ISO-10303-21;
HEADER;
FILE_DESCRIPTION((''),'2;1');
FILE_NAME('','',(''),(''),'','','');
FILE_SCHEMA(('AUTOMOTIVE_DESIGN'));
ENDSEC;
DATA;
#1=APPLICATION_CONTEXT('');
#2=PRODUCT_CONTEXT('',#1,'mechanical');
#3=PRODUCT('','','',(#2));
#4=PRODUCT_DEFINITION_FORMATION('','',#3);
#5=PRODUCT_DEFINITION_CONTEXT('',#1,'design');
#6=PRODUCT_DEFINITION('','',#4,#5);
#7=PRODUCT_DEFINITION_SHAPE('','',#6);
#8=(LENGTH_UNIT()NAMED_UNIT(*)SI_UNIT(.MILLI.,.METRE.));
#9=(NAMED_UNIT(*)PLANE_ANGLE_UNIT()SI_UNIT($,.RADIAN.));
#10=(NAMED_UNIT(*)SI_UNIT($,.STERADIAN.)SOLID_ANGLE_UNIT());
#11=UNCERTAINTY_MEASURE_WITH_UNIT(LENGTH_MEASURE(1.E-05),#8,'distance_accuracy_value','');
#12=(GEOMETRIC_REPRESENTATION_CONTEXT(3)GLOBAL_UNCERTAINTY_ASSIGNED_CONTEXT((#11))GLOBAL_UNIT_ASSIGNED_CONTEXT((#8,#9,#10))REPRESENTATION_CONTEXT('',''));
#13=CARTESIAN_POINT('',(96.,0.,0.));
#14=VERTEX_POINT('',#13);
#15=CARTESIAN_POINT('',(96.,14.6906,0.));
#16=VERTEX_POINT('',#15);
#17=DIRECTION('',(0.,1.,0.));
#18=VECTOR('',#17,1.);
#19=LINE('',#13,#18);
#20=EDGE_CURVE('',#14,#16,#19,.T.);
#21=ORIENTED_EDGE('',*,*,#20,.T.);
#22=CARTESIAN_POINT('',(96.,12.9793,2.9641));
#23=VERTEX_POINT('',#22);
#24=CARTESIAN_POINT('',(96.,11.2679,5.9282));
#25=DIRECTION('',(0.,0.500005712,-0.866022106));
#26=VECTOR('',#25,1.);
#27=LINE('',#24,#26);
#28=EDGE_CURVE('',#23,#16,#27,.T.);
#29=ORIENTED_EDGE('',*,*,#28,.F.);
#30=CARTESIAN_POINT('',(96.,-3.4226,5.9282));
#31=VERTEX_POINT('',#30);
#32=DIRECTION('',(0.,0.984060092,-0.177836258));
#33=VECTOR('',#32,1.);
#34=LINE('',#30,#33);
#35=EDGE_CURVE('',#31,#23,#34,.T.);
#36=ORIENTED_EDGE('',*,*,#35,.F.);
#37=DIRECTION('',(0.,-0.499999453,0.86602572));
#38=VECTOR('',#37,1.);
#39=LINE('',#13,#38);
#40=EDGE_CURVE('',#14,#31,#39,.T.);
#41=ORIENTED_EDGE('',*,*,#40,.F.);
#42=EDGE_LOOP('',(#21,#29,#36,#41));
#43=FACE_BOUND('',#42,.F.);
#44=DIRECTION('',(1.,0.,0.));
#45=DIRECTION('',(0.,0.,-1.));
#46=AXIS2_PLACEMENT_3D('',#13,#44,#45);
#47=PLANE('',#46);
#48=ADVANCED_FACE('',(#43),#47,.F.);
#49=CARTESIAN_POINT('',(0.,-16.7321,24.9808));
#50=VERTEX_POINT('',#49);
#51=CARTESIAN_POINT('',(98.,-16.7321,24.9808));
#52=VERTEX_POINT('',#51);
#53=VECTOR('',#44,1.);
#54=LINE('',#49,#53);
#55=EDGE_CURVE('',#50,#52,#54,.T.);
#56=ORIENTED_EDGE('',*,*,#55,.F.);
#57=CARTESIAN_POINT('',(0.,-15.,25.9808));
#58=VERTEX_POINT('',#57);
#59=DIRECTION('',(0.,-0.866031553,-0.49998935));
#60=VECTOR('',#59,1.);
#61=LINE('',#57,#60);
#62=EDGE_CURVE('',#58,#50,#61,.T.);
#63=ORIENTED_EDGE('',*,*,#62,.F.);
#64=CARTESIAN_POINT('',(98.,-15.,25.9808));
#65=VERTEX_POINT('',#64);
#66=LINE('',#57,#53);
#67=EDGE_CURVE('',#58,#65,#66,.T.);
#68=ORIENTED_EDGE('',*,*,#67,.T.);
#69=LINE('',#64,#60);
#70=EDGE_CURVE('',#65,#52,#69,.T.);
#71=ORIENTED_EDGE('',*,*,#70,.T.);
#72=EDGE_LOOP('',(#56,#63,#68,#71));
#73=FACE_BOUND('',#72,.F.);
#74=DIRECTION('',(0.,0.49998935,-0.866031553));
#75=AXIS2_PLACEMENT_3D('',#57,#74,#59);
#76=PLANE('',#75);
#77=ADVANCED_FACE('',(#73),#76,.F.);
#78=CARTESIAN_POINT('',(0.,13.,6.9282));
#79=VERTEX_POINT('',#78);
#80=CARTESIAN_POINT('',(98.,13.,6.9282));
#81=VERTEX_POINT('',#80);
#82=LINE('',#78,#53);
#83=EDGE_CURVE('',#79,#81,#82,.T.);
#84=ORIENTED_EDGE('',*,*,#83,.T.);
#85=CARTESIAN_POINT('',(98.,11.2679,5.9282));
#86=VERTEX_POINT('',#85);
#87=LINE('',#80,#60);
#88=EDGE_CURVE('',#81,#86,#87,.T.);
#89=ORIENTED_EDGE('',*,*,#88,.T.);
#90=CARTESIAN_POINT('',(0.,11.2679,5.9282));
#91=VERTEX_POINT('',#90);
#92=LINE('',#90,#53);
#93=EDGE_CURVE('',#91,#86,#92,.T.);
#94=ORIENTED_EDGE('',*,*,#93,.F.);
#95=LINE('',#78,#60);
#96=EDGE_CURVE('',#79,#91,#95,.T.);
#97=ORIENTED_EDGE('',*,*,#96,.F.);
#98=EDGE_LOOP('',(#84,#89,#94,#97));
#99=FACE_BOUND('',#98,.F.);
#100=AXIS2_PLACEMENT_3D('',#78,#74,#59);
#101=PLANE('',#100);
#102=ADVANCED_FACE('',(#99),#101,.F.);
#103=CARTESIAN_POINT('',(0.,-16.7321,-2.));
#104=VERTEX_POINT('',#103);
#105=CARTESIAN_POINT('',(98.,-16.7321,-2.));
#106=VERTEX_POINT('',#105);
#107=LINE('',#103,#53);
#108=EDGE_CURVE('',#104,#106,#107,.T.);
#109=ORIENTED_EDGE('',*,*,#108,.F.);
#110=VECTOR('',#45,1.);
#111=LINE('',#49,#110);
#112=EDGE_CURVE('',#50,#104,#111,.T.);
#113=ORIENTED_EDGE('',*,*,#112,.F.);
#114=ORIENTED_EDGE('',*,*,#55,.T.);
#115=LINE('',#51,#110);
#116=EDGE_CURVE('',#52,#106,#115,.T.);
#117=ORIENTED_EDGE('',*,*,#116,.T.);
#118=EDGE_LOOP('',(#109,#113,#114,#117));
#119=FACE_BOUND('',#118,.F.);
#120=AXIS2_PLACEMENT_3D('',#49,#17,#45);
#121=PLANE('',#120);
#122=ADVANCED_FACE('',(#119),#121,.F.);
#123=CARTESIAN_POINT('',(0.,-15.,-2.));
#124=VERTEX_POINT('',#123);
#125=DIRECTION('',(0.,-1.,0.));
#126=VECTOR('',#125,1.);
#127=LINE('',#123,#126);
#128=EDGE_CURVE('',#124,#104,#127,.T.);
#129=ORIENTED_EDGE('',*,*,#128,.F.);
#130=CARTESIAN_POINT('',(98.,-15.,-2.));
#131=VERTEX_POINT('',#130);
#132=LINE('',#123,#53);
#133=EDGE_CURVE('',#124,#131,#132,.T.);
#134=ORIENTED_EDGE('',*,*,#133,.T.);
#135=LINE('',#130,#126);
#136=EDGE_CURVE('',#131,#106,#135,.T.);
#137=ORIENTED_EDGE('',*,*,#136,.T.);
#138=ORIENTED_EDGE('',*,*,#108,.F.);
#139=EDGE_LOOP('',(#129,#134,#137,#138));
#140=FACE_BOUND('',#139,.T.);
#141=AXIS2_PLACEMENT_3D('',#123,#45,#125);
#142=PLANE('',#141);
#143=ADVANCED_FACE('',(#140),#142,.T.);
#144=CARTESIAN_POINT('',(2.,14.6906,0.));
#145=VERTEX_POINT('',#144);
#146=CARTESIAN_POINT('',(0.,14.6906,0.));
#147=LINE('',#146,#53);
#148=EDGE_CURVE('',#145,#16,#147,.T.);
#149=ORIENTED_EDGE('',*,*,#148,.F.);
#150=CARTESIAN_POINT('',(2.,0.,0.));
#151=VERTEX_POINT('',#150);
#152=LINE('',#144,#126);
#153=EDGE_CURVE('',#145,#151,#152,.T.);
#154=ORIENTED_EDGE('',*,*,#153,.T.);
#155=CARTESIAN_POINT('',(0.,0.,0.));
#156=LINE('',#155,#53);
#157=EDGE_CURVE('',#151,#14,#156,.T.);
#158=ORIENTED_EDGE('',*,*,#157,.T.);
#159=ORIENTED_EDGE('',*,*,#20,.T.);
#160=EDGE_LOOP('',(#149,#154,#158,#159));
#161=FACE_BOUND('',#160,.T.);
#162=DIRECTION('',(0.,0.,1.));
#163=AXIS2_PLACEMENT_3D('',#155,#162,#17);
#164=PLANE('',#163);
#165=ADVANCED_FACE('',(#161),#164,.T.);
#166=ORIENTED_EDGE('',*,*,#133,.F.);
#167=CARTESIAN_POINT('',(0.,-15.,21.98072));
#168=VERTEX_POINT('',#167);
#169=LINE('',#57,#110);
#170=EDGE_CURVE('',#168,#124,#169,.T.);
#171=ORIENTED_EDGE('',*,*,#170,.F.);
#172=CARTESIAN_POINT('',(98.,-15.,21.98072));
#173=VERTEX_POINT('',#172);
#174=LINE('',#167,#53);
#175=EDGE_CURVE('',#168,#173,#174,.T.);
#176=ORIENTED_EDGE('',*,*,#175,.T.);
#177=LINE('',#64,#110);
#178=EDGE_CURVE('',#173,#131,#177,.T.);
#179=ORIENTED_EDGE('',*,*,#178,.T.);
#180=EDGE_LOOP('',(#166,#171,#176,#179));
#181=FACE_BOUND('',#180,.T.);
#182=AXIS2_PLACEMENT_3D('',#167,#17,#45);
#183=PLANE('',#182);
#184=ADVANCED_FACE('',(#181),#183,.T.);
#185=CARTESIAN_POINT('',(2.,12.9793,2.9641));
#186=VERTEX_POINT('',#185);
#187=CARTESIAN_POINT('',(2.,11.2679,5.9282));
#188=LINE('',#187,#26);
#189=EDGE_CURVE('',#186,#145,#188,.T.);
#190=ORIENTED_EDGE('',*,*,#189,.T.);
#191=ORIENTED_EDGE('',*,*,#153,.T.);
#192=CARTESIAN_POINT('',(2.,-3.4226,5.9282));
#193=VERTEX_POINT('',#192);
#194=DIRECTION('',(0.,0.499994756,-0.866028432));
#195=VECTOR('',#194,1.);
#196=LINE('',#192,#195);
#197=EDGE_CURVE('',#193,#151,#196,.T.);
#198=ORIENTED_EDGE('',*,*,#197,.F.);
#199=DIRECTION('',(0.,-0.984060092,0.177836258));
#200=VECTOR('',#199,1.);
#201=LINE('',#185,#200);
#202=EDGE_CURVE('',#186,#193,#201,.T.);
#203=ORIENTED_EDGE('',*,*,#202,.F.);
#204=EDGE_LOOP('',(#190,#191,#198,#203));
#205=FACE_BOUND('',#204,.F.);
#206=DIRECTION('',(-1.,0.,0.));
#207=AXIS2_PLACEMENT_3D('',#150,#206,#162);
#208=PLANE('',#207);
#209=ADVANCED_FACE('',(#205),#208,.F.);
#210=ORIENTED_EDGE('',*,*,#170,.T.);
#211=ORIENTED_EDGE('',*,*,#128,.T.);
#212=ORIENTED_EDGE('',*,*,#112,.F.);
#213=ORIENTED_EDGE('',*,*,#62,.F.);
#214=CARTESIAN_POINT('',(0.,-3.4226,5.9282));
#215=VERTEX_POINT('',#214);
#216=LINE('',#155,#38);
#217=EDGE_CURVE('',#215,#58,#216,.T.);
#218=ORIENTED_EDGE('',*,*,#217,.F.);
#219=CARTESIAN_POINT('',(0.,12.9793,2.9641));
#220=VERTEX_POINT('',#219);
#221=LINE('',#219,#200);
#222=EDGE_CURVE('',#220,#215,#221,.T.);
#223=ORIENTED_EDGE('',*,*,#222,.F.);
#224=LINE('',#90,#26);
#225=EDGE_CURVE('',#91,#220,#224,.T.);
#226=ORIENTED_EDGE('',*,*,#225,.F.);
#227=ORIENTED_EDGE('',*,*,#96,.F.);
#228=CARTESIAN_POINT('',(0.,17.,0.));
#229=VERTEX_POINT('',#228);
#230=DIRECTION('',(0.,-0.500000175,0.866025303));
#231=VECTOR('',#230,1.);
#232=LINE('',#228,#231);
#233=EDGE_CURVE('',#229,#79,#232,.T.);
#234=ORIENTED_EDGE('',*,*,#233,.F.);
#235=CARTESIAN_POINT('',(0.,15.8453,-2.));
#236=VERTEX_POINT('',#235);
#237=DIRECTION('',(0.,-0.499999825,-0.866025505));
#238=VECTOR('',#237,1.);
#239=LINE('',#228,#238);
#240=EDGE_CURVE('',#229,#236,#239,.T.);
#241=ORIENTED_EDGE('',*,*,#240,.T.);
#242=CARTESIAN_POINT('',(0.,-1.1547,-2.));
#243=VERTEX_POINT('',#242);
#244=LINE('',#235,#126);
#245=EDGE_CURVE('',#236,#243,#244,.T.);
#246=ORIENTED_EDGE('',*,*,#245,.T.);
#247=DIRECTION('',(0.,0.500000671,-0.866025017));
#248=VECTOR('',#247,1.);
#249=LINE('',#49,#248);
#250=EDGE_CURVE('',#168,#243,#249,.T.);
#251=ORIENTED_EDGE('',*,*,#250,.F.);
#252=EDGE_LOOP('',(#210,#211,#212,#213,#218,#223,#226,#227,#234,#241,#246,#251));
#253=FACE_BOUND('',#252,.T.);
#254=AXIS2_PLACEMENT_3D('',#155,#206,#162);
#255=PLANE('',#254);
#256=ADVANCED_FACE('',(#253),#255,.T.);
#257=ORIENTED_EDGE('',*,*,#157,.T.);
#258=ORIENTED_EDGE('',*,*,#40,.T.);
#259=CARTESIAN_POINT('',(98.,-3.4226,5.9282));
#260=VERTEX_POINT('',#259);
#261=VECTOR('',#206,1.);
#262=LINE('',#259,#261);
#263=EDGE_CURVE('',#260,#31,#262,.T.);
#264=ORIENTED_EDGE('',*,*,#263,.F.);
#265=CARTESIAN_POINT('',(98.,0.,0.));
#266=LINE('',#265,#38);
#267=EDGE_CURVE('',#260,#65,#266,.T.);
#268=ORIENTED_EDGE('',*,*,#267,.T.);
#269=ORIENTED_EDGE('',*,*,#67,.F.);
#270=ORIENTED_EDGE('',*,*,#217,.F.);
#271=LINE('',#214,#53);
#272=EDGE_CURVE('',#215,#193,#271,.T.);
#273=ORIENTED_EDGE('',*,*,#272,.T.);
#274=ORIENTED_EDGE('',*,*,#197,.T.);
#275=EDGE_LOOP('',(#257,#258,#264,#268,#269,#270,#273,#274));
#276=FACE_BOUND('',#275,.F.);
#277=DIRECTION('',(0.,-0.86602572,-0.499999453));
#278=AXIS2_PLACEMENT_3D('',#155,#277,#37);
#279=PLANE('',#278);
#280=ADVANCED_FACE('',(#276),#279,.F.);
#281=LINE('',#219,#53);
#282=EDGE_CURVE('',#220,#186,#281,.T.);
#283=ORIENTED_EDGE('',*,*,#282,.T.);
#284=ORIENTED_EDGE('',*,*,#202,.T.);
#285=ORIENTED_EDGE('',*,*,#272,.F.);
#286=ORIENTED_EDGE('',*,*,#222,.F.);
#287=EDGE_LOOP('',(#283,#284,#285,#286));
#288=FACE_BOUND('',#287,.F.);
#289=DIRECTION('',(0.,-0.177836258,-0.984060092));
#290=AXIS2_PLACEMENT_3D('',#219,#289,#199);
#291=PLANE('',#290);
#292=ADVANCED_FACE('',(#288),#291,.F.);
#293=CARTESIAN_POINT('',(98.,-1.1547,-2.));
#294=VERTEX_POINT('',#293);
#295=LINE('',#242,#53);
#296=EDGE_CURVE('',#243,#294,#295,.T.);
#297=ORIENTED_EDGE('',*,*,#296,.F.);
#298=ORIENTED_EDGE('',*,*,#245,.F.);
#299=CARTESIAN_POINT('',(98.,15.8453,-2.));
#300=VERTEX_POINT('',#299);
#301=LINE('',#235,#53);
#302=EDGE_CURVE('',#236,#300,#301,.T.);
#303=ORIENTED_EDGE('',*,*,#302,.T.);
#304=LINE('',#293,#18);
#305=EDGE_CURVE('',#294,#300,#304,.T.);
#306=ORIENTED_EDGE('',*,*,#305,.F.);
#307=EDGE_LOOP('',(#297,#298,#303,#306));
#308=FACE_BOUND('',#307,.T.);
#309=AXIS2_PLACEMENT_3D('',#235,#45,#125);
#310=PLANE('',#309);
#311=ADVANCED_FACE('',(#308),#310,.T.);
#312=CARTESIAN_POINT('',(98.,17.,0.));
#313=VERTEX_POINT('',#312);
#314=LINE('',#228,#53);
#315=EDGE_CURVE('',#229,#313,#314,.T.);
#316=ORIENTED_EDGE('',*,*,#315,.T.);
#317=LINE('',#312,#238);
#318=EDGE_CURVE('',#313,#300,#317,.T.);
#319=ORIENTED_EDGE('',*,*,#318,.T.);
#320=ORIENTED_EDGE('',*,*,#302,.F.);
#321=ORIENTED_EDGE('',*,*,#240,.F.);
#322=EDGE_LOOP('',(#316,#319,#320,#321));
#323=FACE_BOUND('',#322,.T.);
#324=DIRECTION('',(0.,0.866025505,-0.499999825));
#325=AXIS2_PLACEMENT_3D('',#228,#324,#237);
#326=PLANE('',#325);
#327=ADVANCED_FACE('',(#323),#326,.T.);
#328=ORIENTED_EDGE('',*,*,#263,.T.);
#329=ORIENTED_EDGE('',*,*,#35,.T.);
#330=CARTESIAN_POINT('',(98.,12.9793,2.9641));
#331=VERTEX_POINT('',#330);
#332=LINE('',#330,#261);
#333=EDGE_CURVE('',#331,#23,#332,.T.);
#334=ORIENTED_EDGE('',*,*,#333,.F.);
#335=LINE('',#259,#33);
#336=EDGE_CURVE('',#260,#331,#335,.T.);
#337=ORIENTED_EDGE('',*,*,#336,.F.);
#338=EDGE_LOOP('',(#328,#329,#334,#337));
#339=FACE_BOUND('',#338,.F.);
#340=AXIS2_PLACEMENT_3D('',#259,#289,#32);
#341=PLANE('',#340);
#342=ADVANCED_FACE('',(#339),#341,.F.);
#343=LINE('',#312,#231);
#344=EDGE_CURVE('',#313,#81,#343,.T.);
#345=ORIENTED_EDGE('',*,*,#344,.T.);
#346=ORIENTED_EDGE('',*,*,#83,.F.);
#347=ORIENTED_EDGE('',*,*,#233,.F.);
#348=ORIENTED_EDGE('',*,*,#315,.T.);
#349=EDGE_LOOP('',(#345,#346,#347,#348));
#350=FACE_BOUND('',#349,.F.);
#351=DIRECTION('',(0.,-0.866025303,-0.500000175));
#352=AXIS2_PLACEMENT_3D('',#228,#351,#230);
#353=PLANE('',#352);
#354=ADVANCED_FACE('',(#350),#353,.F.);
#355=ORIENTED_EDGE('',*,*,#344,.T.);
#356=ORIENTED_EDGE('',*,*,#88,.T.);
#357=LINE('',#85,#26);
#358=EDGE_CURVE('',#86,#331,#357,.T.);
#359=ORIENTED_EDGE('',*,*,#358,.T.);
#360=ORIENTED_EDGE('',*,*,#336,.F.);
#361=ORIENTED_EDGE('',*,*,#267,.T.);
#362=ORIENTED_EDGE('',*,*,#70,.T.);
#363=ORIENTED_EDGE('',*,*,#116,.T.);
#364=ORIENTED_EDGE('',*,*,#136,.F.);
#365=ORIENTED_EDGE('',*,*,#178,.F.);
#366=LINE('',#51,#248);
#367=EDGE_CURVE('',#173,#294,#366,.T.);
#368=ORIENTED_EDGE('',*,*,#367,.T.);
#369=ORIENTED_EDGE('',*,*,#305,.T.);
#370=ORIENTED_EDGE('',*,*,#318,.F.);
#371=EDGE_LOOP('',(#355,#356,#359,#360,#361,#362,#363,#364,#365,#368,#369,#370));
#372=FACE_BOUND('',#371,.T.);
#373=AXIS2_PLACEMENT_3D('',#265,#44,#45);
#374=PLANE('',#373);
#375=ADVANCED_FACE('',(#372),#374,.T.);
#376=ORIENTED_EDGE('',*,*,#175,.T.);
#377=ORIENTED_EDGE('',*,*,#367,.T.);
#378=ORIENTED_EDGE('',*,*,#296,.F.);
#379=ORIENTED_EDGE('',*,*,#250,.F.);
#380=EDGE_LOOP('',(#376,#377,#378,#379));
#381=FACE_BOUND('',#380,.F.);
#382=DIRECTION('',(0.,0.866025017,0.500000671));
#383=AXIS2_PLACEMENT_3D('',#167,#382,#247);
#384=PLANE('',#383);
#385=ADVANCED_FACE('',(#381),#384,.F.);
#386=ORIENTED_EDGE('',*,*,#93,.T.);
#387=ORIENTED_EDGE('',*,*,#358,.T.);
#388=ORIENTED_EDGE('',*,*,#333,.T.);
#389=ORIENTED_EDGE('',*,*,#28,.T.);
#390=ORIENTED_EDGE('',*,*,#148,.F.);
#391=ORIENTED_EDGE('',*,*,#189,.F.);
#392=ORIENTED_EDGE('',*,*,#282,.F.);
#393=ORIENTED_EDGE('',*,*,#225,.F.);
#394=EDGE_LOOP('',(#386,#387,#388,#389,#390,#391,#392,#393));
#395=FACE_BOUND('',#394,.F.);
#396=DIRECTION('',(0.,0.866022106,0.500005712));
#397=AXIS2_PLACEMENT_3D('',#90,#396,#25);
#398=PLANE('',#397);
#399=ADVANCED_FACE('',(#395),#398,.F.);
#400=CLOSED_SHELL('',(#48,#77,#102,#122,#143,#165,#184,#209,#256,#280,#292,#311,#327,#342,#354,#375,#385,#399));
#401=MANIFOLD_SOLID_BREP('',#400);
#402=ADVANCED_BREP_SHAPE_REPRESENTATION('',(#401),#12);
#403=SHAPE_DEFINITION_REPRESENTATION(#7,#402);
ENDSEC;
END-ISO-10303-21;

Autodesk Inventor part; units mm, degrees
ref_plane "YZ Plane" through (0, 0, 0) normal (1, 0, 0) x (0, 1, 0)
ref_plane "XZ Plane" through (0, 0, 0) normal (0, 1, 0) x (-1, 0, 0)
ref_plane "XY Plane" through (0, 0, 0) normal (0, 0, 1) x (1, 0, 0)
sketch "Sketch1" plane through (0, 0, 0) normal (1, 0, 0) x (0, 1, 0)
  line L0 (0, 0) -> (17, 0)
  line L1 (17, 0) -> (17, -2)
  line L2 (17, -2) -> (0, -2)
  line L3 (0, -2) -> (0, 0)
  line L4 (17, 0) -> (13, 6.9282)
  line L5 (17, 0) -> (25, 0) construction
  line L6 (13, 6.9282) -> (11.2679, 5.9282)
  line L7 (11.2679, 5.9282) -> (14.6906, 0)
  line L8 (0, 0) -> (-15, 25.9808)
  line L9 (0, 0) -> (30, 0) construction
  line L10 (-15, 25.9808) -> (-16.7321, 24.9808)
  line L11 (-16.7321, 24.9808) -> (-1.1547, -2)
  line L12 (-1.1547, -2) -> (0, -2)
  line L13 (-16.7321, 24.9808) -> (-16.7321, -2)
  line L14 (-15, 25.9808) -> (-15, -2)
  line L15 (-15, -2) -> (-16.7321, -2)
  line L16 (17, 0) -> (15.8453, -2)
  point P0 (-15, 21.9808)
  dimension "d0" = 17
  dimension "d1" = 2
  dimension "d2" = 8
  dimension "d3" = 120
  dimension "d4" = 2
  dimension "d5" = 30
  dimension "d6" = 120
  dimension "d7" = 2
extrude "Extrusion1" add sketch "Sketch1" along normal blind 98 contours L0 L16 L2 L3 | L3 L12 L11 L14 L8 | L7 L6 L4 L0 | L14 L11 L10 | L11 L14 L15 L13
sketch "Sketch2" plane through (98, 0, 0) normal (1, 0, 0) x (0, 0, -1)
  line L0 (-5.9282, 11.2679) -> (-5.9282, -3.4226)
  line L1 (0, 0) -> (-25.9808, -15) projected
  line L2 (-5.9282, -3.4226) -> (-2.9641, 12.9793)
  line L3 (-5.9282, 11.2679) -> (0, 14.6906) projected
  line L4 (-5.9282, -3.4226) -> (0, 0)
  line L5 (0, 0) -> (0, 14.6906)
  line L6 (-2.9641, 12.9793) -> (0, 14.6906)
extrude "Extrusion2" add sketch "Sketch2" against normal blind 2 contours L2 L3 L5 L1
sketch "Sketch3" plane through (0, 0, 0) normal (-1, 0, 0) x (0, 0, 1)
  line L0 (2.9641, 12.9793) -> (5.9282, -3.4226) projected
  line L1 (5.9282, -3.4226) -> (2.9641, 12.9793)
  line L2 (5.9282, 11.2679) -> (0, 14.6906) projected
  line L3 (2.9641, 12.9793) -> (0, 14.6906)
  line L4 (5.9282, -3.4226) -> (0, 0) projected
  line L5 (0, 14.6906) -> (0, 0)
  line L6 (0, 0) -> (5.9282, -3.4226)
extrude "Extrusion3" add sketch "Sketch3" against normal blind 2
properties part number "Name_card_case"
